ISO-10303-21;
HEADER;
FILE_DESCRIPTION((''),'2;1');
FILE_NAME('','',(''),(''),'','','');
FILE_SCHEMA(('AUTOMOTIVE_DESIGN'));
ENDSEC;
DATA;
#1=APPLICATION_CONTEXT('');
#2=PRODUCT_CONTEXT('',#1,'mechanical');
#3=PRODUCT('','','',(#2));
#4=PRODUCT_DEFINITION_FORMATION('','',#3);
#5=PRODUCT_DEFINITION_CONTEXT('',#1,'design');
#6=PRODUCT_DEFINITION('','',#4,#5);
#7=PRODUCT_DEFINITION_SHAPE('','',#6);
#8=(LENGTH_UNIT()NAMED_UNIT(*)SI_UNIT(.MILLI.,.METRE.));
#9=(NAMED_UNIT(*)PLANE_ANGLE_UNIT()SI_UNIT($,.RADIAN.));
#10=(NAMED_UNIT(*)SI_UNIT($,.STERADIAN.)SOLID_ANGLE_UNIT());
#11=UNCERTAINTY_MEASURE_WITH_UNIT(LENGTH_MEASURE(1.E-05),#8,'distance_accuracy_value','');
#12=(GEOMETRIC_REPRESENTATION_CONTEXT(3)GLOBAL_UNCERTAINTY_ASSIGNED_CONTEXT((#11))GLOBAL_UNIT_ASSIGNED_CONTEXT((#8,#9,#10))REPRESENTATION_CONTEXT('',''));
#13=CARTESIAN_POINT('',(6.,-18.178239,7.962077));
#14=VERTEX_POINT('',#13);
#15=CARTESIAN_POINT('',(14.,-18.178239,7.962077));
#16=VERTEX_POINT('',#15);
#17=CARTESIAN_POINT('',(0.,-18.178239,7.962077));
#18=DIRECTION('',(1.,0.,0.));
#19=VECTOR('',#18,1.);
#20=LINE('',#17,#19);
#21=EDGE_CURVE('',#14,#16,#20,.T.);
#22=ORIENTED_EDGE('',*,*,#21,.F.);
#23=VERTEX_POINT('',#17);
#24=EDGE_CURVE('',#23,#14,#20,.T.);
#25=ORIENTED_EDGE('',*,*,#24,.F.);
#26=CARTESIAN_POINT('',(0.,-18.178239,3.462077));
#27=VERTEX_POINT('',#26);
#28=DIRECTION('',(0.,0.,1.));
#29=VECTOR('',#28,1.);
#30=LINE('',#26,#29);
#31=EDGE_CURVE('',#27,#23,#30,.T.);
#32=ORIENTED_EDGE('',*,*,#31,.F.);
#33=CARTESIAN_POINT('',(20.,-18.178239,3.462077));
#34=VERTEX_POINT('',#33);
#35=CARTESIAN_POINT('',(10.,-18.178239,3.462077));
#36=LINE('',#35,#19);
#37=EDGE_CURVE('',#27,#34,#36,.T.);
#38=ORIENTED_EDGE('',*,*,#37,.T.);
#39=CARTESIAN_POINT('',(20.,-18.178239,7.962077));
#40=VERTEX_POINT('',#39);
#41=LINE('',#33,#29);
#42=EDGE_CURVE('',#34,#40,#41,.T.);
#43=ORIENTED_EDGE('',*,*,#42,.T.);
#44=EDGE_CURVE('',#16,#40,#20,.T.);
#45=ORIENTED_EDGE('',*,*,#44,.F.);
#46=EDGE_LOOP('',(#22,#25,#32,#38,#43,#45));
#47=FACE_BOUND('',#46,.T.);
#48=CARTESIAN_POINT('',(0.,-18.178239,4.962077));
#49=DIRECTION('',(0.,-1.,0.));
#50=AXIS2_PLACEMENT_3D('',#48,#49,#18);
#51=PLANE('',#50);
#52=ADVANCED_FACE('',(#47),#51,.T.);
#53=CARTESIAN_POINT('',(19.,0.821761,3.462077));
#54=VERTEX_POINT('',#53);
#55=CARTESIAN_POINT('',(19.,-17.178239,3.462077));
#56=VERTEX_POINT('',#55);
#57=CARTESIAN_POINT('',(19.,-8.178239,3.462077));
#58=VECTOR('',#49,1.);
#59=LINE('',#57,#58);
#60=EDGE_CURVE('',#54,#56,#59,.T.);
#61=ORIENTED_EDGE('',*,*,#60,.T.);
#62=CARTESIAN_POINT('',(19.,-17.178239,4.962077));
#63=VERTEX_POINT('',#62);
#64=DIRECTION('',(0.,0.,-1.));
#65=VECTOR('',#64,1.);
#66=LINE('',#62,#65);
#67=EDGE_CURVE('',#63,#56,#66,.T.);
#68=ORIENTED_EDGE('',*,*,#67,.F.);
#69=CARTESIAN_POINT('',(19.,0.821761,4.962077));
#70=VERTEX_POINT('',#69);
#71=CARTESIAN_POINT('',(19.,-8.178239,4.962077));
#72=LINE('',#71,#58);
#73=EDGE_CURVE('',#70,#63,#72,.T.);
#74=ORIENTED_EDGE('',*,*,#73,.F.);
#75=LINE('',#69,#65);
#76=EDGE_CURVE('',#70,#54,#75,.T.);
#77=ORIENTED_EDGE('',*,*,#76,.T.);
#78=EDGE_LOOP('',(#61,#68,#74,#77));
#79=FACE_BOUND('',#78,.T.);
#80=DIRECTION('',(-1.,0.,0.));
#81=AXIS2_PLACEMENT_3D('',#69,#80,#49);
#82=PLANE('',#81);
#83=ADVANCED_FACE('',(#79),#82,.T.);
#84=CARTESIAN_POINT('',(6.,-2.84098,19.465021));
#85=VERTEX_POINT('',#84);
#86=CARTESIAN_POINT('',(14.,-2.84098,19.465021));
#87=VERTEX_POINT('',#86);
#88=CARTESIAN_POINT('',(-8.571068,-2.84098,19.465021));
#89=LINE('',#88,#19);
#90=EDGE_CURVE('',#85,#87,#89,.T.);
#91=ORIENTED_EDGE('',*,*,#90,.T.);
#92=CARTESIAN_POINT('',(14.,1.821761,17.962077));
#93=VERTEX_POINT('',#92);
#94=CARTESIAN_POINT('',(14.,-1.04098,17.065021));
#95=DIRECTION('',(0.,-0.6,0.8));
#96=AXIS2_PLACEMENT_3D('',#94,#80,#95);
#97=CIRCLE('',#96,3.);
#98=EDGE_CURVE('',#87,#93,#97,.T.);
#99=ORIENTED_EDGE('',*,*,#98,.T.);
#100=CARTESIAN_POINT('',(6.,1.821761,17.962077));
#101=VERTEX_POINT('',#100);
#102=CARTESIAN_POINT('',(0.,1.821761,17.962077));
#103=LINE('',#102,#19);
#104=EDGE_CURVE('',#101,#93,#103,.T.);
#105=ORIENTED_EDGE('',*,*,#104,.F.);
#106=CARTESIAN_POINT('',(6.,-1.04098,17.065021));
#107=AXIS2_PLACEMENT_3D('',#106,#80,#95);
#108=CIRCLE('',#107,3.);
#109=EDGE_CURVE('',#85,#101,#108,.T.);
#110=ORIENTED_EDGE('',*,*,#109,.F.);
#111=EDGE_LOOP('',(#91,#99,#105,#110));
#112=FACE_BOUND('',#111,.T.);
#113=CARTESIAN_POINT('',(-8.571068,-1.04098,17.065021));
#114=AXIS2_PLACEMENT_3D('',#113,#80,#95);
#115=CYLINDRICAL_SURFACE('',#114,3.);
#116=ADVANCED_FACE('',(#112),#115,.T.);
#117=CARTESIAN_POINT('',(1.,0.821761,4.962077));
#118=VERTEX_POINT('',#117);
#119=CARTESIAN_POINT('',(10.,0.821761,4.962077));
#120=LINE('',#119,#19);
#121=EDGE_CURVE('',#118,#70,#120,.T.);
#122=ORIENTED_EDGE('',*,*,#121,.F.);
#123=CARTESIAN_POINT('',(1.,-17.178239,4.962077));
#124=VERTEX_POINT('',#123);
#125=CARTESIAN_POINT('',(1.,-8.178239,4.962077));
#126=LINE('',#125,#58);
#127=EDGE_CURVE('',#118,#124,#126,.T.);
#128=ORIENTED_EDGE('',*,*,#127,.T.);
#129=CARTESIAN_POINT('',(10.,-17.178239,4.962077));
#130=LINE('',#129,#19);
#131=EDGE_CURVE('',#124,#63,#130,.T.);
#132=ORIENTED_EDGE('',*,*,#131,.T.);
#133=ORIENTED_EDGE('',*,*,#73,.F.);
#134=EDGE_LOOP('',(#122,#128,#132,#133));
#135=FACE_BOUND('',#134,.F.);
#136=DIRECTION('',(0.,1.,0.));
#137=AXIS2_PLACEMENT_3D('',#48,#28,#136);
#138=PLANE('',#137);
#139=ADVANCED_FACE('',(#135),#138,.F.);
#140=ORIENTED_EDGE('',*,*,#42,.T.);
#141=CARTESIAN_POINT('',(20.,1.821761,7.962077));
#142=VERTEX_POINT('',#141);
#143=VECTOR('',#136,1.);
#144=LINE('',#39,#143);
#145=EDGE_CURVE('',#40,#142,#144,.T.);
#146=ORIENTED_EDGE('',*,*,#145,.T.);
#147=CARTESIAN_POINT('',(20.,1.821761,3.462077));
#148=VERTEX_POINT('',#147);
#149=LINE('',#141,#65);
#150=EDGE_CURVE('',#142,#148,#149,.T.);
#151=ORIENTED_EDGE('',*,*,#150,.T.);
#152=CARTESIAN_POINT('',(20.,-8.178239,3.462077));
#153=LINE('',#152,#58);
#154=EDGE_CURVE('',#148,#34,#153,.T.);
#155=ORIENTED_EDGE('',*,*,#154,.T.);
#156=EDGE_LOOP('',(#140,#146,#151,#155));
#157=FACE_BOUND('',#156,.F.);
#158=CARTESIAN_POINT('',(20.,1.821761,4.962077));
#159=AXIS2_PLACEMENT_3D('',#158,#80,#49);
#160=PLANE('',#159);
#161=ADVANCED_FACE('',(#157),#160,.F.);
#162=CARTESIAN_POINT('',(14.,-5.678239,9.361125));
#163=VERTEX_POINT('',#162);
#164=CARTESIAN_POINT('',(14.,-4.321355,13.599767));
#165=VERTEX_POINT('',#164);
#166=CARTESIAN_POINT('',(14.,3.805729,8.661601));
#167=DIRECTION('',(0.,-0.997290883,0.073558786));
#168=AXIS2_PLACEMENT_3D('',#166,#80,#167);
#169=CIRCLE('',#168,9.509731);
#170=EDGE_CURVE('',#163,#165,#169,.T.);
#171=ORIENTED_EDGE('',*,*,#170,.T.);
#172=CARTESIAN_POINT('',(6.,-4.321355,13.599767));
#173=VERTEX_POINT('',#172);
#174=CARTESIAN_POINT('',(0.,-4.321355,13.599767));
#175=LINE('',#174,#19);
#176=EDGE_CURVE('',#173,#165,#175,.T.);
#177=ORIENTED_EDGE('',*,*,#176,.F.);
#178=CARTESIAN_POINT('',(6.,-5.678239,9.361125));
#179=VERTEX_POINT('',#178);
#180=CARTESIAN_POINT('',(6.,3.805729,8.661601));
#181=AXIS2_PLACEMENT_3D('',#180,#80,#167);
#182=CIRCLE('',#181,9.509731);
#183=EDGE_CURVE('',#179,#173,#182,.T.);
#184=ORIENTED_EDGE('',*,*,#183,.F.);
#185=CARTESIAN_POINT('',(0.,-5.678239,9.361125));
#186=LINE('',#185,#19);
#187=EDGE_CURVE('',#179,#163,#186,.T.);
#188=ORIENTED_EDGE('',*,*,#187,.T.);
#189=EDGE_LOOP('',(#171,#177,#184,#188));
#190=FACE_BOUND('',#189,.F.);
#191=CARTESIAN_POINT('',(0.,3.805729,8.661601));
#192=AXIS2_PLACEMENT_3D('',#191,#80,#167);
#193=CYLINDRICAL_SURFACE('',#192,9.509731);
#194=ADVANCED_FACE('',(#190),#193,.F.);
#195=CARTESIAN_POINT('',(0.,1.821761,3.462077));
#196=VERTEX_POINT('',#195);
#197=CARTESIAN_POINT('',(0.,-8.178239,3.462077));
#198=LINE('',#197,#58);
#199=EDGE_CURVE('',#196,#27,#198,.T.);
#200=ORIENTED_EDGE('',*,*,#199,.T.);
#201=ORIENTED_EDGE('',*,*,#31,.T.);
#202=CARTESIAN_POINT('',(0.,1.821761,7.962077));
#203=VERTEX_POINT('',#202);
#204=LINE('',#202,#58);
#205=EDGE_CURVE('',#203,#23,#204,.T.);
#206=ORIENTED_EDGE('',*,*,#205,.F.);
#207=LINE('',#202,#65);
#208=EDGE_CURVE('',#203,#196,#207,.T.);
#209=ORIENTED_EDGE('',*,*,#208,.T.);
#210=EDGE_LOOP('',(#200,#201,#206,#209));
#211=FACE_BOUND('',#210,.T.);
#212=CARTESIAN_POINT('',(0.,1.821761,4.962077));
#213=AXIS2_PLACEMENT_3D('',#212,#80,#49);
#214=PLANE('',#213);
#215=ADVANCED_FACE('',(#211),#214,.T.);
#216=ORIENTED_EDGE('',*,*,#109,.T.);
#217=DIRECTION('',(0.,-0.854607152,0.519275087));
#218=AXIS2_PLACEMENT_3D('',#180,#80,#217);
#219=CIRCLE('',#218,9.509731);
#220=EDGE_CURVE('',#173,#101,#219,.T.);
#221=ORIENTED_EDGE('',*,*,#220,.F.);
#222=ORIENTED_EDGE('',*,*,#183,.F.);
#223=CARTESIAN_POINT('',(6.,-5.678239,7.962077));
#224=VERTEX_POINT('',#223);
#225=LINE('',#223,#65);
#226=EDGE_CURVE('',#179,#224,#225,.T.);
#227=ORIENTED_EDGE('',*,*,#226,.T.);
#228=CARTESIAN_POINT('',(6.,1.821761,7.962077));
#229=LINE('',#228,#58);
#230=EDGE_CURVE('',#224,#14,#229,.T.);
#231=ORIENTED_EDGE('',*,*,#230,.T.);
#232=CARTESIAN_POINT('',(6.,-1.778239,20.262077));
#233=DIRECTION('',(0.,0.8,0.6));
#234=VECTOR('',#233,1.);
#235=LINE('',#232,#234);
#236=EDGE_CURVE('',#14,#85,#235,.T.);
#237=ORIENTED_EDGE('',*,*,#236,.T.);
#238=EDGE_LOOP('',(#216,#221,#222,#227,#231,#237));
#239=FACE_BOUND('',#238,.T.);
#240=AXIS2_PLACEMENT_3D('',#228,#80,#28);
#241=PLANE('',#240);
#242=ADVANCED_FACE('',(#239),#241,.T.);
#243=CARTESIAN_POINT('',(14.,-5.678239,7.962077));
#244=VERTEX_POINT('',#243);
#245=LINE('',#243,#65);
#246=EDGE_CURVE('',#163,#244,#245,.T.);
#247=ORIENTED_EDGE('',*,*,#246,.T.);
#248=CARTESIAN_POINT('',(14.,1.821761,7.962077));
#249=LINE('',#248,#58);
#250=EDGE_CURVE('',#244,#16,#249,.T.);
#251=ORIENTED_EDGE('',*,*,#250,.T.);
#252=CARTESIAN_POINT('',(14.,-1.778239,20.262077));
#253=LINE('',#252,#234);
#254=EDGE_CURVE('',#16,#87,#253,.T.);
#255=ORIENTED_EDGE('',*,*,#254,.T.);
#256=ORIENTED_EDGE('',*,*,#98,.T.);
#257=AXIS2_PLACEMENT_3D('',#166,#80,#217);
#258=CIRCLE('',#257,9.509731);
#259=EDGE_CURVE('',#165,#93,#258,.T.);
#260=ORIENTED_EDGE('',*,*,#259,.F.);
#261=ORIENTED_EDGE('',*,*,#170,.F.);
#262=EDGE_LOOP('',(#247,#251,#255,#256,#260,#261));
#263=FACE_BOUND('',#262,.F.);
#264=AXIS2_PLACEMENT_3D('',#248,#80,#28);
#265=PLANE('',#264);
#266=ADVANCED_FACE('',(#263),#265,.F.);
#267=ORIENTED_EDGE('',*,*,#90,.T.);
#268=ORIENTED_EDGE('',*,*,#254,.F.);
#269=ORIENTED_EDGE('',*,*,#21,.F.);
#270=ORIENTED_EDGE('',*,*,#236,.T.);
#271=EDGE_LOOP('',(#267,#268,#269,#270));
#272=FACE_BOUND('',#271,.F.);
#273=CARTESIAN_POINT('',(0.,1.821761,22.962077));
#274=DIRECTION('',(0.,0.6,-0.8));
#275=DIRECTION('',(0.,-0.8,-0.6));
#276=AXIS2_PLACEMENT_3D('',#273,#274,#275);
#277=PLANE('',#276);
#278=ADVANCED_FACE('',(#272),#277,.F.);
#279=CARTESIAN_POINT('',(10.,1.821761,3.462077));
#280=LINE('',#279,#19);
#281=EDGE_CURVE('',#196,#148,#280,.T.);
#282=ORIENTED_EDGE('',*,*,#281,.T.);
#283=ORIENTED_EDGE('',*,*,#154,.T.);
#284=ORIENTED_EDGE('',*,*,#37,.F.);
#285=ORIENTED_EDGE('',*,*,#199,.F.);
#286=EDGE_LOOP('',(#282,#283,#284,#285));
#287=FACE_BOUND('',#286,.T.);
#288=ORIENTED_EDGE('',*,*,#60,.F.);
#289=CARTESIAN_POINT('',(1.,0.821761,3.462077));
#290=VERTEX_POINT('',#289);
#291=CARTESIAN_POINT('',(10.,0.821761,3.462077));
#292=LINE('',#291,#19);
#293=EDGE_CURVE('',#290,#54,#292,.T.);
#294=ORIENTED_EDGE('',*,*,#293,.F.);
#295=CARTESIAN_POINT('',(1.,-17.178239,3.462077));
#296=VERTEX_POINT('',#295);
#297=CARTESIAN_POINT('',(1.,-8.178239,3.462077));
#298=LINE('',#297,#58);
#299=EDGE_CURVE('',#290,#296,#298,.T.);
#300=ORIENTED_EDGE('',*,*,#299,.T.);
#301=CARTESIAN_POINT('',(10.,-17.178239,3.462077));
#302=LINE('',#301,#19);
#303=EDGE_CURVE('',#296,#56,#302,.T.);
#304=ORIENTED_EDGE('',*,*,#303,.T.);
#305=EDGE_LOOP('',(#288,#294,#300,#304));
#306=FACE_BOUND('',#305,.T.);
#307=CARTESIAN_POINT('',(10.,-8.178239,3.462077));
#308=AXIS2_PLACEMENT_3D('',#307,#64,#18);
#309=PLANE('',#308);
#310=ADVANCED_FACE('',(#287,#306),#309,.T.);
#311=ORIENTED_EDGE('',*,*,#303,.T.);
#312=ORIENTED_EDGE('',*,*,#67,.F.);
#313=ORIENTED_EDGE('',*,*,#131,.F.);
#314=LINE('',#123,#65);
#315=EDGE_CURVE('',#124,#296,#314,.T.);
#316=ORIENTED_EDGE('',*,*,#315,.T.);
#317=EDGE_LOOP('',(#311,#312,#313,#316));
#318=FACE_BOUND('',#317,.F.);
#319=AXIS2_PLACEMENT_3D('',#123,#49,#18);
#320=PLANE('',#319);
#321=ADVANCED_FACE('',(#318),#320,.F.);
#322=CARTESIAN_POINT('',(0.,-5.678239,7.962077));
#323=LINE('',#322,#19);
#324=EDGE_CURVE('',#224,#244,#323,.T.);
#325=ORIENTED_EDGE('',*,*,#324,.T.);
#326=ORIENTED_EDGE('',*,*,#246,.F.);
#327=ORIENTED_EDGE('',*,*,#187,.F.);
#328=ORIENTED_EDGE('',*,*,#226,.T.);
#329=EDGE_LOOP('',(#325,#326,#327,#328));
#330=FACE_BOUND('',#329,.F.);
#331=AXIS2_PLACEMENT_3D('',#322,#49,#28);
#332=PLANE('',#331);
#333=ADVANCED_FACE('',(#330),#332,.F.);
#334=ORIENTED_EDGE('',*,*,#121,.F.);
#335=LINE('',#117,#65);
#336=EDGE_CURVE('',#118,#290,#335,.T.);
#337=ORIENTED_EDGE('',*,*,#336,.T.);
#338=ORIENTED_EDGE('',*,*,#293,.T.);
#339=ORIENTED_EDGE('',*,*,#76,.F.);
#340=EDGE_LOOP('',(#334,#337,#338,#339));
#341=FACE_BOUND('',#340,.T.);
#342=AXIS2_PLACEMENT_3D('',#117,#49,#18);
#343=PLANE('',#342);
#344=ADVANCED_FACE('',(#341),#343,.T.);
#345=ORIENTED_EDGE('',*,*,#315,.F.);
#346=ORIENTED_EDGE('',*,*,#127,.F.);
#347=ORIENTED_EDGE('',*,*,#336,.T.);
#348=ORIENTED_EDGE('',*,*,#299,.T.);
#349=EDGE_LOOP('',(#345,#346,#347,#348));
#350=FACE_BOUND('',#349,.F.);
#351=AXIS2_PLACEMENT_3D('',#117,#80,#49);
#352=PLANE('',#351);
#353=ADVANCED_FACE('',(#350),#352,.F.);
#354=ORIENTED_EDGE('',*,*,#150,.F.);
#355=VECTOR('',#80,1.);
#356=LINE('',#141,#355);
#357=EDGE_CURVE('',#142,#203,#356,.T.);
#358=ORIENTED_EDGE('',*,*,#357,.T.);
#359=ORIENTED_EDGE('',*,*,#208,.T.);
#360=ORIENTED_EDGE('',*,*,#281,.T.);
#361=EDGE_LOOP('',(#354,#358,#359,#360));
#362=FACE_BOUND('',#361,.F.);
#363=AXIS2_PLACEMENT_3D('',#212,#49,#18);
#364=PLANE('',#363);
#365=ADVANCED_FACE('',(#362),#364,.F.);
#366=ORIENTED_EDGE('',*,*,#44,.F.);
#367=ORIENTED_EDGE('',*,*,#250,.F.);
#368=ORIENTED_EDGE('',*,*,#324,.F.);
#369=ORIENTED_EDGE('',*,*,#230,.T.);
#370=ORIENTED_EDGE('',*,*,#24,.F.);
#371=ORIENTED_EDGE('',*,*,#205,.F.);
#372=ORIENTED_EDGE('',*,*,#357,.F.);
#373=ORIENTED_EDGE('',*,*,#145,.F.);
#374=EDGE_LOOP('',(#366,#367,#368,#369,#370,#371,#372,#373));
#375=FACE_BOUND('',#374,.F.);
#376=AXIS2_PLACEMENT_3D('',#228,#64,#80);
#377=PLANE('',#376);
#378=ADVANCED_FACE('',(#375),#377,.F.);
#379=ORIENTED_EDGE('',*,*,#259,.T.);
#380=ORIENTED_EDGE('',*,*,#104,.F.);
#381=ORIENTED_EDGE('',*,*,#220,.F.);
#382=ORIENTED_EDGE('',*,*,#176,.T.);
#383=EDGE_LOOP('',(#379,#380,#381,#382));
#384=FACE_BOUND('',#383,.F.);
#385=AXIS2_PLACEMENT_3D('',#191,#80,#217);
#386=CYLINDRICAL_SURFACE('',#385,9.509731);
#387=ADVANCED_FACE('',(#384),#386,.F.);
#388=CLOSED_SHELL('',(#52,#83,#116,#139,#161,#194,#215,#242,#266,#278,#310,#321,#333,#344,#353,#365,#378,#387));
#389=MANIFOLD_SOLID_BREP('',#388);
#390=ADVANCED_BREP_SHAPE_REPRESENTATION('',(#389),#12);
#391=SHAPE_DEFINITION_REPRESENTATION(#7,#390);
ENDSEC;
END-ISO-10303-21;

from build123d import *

# Parameters (mm, degrees)
F1_DEPTH    = 20
F2_W        = 6
F2_H        = 15
F3_DEPTH    = 20.001
F4_T1_DEPTH = 37.1421356237
F5_W        = 20
F5_H        = 20
F5_W_2      = 18
F5_H_2      = 18
F6_DEPTH    = 1.5


# Not quite as in the source:
# - a fillet or chamfer that OpenCascade refuses, or shapes differently, is made with other operations: its cross-section is extruded or revolved along the edge and cut away or added


with BuildPart() as f1:
    # F0 (on Right) → F1 (new body)
    with BuildSketch(Plane.YZ):
        with BuildLine():
            Line((-18.178238757, 7.9620768987), (-18.178238757, 4.9620768987))
            Line((-18.178238757, 4.9620768987), (1.821761243, 4.9620768987))
            Line((1.821761243, 4.9620768987), (1.821761243, 7.9620768987))
            Line((1.821761243, 7.9620768987), (-5.678238757, 7.9620768987))
            Line((-5.678238757, 7.9620768987), (-5.678238757, 9.3611253762))
            ThreePointArc((-5.678238757, 9.3611253762), (-5.2512465802, 11.5609410366), (-4.321354907, 13.5997673497))
            ThreePointArc((-4.321354907, 13.5997673497), (-1.7002475397, 16.4152583597), (1.821761243, 17.9620768987))
            Line((1.821761243, 17.9620768987), (1.821761243, 22.9620768987))
            Line((1.821761243, 22.9620768987), (-18.178238757, 7.9620768987))
        make_face()
    extrude(amount=F1_DEPTH)

    # F2 (on face) → F3 (cut, through all)
    with BuildSketch(Plane(origin=(0, 1.821761243, 0), x_dir=(-1, 0, 0), z_dir=(0, 1, 0))):
        with Locations((-17, 15.4620768987)):
            Rectangle(F2_W, F2_H)
        with Locations((-3, 15.4620768987)):
            Rectangle(F2_W, F2_H)
    extrude(amount=-F3_DEPTH, mode=Mode.SUBTRACT)

    # F4: fillet of radius 3 on 1 edges, made by hand

    # F4_s2 → F4_t1 (cut)
    with BuildSketch(Plane.YZ.offset(-8.5710678119)):
        with BuildLine():
            ThreePointArc((-2.8409804568, 19.4650206238), (-0.1206191471, 19.9203551155), (1.821761243, 17.9620768987))
            Line((1.821761243, 17.9620768987), (1.821761243, 22.9620768987))
            Line((1.821761243, 22.9620768987), (-2.8409804568, 19.4650206238))
        make_face()
    extrude(amount=F4_T1_DEPTH, mode=Mode.SUBTRACT)

    # F5 (on face) → F6 (join)
    with BuildSketch(Plane(origin=(0, 0, 4.9620768987), x_dir=(1, 0, 0), z_dir=(0, 0, -1))):
        with Locations((10, 8.178238757)):
            Rectangle(F5_W, F5_H)
        with Locations((10, 8.178238757)):
            Rectangle(F5_W_2, F5_H_2, mode=Mode.SUBTRACT)
    extrude(amount=F6_DEPTH)


solid = f1.part
